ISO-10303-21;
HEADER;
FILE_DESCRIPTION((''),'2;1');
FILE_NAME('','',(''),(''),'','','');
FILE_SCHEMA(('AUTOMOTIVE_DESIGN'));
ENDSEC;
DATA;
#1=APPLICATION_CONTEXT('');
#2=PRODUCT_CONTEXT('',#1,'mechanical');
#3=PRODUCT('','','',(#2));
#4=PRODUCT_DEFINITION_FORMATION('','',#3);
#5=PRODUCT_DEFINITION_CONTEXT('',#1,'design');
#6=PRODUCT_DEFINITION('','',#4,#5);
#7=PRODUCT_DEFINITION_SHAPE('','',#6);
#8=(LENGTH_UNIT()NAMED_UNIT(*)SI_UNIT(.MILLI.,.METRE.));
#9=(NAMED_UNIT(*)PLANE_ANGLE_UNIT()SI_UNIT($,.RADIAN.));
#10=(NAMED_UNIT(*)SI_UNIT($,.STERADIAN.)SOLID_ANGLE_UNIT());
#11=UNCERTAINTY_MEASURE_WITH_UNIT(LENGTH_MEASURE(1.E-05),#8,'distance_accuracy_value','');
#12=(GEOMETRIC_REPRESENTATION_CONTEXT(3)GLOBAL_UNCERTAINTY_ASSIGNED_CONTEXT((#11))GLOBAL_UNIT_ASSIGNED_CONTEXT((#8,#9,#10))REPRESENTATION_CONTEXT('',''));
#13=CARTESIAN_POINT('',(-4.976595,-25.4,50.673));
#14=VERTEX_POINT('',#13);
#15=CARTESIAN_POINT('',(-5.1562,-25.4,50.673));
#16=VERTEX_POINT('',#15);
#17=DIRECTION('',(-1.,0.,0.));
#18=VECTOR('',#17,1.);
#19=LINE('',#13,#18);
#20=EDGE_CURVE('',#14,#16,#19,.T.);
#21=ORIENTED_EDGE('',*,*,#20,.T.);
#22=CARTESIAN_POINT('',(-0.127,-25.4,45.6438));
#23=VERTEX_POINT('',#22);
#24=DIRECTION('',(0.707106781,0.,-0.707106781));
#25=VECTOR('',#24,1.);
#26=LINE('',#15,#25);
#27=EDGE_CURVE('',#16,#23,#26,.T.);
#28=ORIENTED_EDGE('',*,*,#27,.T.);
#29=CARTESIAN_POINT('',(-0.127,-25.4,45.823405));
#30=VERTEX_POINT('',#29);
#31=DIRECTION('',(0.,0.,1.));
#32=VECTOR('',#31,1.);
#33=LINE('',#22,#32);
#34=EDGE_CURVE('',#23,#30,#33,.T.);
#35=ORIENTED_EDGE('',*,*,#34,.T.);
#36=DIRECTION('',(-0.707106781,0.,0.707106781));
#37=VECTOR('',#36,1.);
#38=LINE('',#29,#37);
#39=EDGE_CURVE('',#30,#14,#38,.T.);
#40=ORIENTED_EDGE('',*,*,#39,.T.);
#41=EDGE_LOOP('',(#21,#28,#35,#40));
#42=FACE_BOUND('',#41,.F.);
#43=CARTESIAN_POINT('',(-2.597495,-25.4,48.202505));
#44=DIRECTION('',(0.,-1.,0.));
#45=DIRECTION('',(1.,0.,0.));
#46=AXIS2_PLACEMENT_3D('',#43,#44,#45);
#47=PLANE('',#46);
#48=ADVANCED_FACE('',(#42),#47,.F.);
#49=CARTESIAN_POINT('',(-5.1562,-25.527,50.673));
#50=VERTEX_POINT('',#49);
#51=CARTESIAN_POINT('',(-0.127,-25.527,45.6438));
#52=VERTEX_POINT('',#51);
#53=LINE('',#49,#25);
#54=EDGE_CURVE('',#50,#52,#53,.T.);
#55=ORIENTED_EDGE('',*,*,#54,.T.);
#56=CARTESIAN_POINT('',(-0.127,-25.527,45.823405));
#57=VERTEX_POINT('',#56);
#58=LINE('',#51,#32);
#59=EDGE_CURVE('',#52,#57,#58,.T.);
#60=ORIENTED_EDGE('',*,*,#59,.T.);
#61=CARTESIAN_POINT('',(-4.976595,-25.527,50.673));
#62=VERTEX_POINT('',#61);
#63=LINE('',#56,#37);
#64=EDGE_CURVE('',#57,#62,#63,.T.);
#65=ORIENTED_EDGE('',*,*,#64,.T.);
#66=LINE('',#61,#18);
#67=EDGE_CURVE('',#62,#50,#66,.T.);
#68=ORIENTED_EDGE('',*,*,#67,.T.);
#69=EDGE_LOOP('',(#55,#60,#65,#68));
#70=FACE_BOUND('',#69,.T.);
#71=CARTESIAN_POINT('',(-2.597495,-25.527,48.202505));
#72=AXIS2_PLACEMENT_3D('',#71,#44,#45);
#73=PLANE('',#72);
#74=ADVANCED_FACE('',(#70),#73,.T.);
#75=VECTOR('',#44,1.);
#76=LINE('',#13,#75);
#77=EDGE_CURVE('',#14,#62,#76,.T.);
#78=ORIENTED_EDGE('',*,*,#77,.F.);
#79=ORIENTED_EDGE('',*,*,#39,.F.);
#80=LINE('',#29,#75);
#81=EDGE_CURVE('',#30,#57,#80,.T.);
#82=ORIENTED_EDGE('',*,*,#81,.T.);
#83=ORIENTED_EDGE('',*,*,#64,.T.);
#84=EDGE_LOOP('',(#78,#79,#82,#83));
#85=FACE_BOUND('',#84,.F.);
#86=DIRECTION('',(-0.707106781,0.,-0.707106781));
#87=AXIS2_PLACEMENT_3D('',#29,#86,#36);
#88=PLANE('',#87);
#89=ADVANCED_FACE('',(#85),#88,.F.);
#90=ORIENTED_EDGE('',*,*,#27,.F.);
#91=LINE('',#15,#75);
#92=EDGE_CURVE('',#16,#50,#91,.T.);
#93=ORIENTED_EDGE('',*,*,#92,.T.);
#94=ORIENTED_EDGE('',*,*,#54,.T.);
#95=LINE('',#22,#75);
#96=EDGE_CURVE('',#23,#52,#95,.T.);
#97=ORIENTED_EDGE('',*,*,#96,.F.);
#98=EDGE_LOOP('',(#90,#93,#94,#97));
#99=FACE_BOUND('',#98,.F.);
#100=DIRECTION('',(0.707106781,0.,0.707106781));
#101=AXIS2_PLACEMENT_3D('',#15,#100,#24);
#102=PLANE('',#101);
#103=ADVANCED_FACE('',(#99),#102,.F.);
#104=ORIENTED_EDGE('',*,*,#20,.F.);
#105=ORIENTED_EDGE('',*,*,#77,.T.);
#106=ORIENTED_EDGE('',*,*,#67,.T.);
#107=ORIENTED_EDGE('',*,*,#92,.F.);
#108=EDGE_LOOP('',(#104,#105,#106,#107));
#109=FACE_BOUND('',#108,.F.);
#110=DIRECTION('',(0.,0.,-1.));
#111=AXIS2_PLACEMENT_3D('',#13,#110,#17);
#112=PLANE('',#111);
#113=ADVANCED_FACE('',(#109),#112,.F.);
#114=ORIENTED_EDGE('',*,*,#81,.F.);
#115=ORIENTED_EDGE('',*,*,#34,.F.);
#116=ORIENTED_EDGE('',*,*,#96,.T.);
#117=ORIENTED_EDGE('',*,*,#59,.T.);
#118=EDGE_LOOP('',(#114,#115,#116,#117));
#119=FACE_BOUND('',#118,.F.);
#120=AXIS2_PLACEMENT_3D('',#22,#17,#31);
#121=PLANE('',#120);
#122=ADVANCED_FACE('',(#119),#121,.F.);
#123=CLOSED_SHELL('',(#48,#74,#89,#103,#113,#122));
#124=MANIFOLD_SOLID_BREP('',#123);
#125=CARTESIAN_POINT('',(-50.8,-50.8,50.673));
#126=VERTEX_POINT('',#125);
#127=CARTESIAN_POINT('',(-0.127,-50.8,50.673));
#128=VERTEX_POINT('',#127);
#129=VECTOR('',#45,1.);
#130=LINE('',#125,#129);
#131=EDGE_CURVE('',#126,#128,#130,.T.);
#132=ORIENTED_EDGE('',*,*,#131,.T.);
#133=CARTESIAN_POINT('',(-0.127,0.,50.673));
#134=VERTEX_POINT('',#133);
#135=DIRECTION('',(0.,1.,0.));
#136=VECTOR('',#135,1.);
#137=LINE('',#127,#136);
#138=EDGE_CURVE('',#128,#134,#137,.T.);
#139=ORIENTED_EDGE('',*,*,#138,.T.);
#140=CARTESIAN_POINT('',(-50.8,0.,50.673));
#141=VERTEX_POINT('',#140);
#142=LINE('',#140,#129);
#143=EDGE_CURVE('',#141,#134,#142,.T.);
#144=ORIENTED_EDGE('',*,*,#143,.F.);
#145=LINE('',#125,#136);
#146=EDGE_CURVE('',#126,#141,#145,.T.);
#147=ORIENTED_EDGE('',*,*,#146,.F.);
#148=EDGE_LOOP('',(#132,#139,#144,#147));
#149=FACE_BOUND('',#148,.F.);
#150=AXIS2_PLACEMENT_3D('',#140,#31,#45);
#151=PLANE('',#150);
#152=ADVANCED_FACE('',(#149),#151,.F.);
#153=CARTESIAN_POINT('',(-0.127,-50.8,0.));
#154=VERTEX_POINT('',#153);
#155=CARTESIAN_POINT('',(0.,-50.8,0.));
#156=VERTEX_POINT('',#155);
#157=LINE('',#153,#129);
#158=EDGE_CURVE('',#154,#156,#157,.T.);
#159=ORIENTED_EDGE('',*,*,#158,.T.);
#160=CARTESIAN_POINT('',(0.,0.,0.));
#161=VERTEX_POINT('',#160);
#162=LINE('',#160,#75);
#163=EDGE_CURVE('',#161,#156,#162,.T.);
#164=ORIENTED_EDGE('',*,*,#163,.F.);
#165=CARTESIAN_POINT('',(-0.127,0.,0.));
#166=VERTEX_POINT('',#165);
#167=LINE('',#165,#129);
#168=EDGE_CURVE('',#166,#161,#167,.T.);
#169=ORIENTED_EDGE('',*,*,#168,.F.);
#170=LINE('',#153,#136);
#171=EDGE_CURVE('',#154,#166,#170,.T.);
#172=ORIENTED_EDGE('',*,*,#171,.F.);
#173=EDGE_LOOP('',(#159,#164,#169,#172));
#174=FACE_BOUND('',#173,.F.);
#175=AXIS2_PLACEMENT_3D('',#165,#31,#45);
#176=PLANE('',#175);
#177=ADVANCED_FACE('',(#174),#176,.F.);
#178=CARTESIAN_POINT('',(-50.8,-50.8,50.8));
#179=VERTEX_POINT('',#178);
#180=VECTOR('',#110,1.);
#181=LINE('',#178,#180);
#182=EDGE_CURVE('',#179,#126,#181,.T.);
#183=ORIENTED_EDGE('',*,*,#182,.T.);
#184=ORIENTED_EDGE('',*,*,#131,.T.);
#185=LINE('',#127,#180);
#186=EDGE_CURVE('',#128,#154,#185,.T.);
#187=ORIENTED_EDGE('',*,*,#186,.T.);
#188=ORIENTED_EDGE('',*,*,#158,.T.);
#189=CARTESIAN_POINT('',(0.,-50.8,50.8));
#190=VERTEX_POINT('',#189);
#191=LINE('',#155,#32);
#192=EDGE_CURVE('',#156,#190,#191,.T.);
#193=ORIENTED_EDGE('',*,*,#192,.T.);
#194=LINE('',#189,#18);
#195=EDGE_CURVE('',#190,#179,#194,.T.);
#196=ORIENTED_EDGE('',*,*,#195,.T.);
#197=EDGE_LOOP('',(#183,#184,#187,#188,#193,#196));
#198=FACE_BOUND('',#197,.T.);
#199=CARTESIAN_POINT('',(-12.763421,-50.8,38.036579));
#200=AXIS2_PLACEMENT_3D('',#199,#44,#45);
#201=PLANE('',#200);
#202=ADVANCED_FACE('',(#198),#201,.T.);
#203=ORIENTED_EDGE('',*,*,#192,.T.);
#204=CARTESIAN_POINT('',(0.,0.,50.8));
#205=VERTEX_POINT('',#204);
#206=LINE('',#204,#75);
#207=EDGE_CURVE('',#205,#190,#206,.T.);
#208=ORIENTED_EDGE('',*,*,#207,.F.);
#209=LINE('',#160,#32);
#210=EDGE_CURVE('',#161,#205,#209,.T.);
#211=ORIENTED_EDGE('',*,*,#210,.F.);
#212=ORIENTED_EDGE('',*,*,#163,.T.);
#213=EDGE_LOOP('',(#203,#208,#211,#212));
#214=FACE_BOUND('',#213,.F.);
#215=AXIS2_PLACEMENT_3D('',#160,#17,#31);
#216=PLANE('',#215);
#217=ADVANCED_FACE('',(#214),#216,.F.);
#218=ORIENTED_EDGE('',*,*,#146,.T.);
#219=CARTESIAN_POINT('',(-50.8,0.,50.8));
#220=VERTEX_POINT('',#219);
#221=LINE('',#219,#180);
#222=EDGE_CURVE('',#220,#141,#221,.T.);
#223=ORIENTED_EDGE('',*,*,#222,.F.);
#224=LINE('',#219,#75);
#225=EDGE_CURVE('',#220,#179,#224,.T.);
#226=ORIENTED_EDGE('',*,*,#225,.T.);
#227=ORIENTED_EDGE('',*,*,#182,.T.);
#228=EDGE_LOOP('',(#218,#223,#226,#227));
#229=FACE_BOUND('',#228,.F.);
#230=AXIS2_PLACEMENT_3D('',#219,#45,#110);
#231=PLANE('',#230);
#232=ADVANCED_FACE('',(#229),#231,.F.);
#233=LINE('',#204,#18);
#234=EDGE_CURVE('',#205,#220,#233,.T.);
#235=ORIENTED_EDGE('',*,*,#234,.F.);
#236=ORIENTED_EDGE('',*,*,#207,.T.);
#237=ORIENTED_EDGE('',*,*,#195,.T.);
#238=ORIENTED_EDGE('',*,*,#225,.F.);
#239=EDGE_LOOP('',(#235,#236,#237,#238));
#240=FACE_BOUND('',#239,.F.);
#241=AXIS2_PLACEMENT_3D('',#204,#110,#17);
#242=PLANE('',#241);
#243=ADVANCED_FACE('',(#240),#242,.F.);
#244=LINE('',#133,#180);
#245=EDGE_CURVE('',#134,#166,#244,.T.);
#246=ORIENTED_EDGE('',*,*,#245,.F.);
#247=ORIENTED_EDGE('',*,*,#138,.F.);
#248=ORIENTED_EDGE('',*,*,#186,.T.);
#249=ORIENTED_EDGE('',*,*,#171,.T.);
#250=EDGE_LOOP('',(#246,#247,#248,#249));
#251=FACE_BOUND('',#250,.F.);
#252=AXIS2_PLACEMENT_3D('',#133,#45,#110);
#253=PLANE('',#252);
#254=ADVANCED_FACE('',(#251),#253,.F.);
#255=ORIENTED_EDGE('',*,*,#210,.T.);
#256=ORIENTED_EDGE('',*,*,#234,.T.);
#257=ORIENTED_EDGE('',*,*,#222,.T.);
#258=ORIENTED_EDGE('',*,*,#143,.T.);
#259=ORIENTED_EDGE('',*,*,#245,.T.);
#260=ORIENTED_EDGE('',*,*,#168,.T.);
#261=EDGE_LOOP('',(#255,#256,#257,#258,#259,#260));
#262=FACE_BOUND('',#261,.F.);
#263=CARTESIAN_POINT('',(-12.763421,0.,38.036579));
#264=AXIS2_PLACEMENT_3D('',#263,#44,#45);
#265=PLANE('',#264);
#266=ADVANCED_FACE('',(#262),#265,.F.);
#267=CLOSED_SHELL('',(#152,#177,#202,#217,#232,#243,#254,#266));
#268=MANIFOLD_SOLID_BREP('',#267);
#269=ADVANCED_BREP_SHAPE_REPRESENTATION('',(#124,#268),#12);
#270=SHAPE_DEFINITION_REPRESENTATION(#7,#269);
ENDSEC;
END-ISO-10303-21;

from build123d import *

# Parameters (mm, degrees)
F1_DEPTH = 25.4
F3_DEPTH = 0.127
F4_DEPTH = 50.8


with BuildPart() as f1:
    # F0 (on Front) → F1 (new body)
    with BuildSketch(Plane.XZ):
        Polygon((-0.127, 0), (0, 0), (0, 50.8), (-50.8, 50.8), (-50.8, 50.673), (-0.127, 50.673), align=None)
    extrude(amount=F1_DEPTH)

    # F0 (on Front) → F4 (join)
    with BuildSketch(Plane.XZ):
        Polygon((-0.127, 0), (0, 0), (0, 50.8), (-50.8, 50.8), (-50.8, 50.673), (-0.127, 50.673), align=None)
    extrude(amount=F4_DEPTH)


with BuildPart() as f3:
    # F2 (on face) → F3 (new body)
    with BuildSketch(Plane.XZ.offset(25.4)):
        Polygon((-4.9765948776, 50.673), (-5.1562, 50.673), (-0.127, 45.6438), (-0.127, 45.8234051224), align=None)
    extrude(amount=F3_DEPTH)


solid = Compound([f1.part, f3.part])
